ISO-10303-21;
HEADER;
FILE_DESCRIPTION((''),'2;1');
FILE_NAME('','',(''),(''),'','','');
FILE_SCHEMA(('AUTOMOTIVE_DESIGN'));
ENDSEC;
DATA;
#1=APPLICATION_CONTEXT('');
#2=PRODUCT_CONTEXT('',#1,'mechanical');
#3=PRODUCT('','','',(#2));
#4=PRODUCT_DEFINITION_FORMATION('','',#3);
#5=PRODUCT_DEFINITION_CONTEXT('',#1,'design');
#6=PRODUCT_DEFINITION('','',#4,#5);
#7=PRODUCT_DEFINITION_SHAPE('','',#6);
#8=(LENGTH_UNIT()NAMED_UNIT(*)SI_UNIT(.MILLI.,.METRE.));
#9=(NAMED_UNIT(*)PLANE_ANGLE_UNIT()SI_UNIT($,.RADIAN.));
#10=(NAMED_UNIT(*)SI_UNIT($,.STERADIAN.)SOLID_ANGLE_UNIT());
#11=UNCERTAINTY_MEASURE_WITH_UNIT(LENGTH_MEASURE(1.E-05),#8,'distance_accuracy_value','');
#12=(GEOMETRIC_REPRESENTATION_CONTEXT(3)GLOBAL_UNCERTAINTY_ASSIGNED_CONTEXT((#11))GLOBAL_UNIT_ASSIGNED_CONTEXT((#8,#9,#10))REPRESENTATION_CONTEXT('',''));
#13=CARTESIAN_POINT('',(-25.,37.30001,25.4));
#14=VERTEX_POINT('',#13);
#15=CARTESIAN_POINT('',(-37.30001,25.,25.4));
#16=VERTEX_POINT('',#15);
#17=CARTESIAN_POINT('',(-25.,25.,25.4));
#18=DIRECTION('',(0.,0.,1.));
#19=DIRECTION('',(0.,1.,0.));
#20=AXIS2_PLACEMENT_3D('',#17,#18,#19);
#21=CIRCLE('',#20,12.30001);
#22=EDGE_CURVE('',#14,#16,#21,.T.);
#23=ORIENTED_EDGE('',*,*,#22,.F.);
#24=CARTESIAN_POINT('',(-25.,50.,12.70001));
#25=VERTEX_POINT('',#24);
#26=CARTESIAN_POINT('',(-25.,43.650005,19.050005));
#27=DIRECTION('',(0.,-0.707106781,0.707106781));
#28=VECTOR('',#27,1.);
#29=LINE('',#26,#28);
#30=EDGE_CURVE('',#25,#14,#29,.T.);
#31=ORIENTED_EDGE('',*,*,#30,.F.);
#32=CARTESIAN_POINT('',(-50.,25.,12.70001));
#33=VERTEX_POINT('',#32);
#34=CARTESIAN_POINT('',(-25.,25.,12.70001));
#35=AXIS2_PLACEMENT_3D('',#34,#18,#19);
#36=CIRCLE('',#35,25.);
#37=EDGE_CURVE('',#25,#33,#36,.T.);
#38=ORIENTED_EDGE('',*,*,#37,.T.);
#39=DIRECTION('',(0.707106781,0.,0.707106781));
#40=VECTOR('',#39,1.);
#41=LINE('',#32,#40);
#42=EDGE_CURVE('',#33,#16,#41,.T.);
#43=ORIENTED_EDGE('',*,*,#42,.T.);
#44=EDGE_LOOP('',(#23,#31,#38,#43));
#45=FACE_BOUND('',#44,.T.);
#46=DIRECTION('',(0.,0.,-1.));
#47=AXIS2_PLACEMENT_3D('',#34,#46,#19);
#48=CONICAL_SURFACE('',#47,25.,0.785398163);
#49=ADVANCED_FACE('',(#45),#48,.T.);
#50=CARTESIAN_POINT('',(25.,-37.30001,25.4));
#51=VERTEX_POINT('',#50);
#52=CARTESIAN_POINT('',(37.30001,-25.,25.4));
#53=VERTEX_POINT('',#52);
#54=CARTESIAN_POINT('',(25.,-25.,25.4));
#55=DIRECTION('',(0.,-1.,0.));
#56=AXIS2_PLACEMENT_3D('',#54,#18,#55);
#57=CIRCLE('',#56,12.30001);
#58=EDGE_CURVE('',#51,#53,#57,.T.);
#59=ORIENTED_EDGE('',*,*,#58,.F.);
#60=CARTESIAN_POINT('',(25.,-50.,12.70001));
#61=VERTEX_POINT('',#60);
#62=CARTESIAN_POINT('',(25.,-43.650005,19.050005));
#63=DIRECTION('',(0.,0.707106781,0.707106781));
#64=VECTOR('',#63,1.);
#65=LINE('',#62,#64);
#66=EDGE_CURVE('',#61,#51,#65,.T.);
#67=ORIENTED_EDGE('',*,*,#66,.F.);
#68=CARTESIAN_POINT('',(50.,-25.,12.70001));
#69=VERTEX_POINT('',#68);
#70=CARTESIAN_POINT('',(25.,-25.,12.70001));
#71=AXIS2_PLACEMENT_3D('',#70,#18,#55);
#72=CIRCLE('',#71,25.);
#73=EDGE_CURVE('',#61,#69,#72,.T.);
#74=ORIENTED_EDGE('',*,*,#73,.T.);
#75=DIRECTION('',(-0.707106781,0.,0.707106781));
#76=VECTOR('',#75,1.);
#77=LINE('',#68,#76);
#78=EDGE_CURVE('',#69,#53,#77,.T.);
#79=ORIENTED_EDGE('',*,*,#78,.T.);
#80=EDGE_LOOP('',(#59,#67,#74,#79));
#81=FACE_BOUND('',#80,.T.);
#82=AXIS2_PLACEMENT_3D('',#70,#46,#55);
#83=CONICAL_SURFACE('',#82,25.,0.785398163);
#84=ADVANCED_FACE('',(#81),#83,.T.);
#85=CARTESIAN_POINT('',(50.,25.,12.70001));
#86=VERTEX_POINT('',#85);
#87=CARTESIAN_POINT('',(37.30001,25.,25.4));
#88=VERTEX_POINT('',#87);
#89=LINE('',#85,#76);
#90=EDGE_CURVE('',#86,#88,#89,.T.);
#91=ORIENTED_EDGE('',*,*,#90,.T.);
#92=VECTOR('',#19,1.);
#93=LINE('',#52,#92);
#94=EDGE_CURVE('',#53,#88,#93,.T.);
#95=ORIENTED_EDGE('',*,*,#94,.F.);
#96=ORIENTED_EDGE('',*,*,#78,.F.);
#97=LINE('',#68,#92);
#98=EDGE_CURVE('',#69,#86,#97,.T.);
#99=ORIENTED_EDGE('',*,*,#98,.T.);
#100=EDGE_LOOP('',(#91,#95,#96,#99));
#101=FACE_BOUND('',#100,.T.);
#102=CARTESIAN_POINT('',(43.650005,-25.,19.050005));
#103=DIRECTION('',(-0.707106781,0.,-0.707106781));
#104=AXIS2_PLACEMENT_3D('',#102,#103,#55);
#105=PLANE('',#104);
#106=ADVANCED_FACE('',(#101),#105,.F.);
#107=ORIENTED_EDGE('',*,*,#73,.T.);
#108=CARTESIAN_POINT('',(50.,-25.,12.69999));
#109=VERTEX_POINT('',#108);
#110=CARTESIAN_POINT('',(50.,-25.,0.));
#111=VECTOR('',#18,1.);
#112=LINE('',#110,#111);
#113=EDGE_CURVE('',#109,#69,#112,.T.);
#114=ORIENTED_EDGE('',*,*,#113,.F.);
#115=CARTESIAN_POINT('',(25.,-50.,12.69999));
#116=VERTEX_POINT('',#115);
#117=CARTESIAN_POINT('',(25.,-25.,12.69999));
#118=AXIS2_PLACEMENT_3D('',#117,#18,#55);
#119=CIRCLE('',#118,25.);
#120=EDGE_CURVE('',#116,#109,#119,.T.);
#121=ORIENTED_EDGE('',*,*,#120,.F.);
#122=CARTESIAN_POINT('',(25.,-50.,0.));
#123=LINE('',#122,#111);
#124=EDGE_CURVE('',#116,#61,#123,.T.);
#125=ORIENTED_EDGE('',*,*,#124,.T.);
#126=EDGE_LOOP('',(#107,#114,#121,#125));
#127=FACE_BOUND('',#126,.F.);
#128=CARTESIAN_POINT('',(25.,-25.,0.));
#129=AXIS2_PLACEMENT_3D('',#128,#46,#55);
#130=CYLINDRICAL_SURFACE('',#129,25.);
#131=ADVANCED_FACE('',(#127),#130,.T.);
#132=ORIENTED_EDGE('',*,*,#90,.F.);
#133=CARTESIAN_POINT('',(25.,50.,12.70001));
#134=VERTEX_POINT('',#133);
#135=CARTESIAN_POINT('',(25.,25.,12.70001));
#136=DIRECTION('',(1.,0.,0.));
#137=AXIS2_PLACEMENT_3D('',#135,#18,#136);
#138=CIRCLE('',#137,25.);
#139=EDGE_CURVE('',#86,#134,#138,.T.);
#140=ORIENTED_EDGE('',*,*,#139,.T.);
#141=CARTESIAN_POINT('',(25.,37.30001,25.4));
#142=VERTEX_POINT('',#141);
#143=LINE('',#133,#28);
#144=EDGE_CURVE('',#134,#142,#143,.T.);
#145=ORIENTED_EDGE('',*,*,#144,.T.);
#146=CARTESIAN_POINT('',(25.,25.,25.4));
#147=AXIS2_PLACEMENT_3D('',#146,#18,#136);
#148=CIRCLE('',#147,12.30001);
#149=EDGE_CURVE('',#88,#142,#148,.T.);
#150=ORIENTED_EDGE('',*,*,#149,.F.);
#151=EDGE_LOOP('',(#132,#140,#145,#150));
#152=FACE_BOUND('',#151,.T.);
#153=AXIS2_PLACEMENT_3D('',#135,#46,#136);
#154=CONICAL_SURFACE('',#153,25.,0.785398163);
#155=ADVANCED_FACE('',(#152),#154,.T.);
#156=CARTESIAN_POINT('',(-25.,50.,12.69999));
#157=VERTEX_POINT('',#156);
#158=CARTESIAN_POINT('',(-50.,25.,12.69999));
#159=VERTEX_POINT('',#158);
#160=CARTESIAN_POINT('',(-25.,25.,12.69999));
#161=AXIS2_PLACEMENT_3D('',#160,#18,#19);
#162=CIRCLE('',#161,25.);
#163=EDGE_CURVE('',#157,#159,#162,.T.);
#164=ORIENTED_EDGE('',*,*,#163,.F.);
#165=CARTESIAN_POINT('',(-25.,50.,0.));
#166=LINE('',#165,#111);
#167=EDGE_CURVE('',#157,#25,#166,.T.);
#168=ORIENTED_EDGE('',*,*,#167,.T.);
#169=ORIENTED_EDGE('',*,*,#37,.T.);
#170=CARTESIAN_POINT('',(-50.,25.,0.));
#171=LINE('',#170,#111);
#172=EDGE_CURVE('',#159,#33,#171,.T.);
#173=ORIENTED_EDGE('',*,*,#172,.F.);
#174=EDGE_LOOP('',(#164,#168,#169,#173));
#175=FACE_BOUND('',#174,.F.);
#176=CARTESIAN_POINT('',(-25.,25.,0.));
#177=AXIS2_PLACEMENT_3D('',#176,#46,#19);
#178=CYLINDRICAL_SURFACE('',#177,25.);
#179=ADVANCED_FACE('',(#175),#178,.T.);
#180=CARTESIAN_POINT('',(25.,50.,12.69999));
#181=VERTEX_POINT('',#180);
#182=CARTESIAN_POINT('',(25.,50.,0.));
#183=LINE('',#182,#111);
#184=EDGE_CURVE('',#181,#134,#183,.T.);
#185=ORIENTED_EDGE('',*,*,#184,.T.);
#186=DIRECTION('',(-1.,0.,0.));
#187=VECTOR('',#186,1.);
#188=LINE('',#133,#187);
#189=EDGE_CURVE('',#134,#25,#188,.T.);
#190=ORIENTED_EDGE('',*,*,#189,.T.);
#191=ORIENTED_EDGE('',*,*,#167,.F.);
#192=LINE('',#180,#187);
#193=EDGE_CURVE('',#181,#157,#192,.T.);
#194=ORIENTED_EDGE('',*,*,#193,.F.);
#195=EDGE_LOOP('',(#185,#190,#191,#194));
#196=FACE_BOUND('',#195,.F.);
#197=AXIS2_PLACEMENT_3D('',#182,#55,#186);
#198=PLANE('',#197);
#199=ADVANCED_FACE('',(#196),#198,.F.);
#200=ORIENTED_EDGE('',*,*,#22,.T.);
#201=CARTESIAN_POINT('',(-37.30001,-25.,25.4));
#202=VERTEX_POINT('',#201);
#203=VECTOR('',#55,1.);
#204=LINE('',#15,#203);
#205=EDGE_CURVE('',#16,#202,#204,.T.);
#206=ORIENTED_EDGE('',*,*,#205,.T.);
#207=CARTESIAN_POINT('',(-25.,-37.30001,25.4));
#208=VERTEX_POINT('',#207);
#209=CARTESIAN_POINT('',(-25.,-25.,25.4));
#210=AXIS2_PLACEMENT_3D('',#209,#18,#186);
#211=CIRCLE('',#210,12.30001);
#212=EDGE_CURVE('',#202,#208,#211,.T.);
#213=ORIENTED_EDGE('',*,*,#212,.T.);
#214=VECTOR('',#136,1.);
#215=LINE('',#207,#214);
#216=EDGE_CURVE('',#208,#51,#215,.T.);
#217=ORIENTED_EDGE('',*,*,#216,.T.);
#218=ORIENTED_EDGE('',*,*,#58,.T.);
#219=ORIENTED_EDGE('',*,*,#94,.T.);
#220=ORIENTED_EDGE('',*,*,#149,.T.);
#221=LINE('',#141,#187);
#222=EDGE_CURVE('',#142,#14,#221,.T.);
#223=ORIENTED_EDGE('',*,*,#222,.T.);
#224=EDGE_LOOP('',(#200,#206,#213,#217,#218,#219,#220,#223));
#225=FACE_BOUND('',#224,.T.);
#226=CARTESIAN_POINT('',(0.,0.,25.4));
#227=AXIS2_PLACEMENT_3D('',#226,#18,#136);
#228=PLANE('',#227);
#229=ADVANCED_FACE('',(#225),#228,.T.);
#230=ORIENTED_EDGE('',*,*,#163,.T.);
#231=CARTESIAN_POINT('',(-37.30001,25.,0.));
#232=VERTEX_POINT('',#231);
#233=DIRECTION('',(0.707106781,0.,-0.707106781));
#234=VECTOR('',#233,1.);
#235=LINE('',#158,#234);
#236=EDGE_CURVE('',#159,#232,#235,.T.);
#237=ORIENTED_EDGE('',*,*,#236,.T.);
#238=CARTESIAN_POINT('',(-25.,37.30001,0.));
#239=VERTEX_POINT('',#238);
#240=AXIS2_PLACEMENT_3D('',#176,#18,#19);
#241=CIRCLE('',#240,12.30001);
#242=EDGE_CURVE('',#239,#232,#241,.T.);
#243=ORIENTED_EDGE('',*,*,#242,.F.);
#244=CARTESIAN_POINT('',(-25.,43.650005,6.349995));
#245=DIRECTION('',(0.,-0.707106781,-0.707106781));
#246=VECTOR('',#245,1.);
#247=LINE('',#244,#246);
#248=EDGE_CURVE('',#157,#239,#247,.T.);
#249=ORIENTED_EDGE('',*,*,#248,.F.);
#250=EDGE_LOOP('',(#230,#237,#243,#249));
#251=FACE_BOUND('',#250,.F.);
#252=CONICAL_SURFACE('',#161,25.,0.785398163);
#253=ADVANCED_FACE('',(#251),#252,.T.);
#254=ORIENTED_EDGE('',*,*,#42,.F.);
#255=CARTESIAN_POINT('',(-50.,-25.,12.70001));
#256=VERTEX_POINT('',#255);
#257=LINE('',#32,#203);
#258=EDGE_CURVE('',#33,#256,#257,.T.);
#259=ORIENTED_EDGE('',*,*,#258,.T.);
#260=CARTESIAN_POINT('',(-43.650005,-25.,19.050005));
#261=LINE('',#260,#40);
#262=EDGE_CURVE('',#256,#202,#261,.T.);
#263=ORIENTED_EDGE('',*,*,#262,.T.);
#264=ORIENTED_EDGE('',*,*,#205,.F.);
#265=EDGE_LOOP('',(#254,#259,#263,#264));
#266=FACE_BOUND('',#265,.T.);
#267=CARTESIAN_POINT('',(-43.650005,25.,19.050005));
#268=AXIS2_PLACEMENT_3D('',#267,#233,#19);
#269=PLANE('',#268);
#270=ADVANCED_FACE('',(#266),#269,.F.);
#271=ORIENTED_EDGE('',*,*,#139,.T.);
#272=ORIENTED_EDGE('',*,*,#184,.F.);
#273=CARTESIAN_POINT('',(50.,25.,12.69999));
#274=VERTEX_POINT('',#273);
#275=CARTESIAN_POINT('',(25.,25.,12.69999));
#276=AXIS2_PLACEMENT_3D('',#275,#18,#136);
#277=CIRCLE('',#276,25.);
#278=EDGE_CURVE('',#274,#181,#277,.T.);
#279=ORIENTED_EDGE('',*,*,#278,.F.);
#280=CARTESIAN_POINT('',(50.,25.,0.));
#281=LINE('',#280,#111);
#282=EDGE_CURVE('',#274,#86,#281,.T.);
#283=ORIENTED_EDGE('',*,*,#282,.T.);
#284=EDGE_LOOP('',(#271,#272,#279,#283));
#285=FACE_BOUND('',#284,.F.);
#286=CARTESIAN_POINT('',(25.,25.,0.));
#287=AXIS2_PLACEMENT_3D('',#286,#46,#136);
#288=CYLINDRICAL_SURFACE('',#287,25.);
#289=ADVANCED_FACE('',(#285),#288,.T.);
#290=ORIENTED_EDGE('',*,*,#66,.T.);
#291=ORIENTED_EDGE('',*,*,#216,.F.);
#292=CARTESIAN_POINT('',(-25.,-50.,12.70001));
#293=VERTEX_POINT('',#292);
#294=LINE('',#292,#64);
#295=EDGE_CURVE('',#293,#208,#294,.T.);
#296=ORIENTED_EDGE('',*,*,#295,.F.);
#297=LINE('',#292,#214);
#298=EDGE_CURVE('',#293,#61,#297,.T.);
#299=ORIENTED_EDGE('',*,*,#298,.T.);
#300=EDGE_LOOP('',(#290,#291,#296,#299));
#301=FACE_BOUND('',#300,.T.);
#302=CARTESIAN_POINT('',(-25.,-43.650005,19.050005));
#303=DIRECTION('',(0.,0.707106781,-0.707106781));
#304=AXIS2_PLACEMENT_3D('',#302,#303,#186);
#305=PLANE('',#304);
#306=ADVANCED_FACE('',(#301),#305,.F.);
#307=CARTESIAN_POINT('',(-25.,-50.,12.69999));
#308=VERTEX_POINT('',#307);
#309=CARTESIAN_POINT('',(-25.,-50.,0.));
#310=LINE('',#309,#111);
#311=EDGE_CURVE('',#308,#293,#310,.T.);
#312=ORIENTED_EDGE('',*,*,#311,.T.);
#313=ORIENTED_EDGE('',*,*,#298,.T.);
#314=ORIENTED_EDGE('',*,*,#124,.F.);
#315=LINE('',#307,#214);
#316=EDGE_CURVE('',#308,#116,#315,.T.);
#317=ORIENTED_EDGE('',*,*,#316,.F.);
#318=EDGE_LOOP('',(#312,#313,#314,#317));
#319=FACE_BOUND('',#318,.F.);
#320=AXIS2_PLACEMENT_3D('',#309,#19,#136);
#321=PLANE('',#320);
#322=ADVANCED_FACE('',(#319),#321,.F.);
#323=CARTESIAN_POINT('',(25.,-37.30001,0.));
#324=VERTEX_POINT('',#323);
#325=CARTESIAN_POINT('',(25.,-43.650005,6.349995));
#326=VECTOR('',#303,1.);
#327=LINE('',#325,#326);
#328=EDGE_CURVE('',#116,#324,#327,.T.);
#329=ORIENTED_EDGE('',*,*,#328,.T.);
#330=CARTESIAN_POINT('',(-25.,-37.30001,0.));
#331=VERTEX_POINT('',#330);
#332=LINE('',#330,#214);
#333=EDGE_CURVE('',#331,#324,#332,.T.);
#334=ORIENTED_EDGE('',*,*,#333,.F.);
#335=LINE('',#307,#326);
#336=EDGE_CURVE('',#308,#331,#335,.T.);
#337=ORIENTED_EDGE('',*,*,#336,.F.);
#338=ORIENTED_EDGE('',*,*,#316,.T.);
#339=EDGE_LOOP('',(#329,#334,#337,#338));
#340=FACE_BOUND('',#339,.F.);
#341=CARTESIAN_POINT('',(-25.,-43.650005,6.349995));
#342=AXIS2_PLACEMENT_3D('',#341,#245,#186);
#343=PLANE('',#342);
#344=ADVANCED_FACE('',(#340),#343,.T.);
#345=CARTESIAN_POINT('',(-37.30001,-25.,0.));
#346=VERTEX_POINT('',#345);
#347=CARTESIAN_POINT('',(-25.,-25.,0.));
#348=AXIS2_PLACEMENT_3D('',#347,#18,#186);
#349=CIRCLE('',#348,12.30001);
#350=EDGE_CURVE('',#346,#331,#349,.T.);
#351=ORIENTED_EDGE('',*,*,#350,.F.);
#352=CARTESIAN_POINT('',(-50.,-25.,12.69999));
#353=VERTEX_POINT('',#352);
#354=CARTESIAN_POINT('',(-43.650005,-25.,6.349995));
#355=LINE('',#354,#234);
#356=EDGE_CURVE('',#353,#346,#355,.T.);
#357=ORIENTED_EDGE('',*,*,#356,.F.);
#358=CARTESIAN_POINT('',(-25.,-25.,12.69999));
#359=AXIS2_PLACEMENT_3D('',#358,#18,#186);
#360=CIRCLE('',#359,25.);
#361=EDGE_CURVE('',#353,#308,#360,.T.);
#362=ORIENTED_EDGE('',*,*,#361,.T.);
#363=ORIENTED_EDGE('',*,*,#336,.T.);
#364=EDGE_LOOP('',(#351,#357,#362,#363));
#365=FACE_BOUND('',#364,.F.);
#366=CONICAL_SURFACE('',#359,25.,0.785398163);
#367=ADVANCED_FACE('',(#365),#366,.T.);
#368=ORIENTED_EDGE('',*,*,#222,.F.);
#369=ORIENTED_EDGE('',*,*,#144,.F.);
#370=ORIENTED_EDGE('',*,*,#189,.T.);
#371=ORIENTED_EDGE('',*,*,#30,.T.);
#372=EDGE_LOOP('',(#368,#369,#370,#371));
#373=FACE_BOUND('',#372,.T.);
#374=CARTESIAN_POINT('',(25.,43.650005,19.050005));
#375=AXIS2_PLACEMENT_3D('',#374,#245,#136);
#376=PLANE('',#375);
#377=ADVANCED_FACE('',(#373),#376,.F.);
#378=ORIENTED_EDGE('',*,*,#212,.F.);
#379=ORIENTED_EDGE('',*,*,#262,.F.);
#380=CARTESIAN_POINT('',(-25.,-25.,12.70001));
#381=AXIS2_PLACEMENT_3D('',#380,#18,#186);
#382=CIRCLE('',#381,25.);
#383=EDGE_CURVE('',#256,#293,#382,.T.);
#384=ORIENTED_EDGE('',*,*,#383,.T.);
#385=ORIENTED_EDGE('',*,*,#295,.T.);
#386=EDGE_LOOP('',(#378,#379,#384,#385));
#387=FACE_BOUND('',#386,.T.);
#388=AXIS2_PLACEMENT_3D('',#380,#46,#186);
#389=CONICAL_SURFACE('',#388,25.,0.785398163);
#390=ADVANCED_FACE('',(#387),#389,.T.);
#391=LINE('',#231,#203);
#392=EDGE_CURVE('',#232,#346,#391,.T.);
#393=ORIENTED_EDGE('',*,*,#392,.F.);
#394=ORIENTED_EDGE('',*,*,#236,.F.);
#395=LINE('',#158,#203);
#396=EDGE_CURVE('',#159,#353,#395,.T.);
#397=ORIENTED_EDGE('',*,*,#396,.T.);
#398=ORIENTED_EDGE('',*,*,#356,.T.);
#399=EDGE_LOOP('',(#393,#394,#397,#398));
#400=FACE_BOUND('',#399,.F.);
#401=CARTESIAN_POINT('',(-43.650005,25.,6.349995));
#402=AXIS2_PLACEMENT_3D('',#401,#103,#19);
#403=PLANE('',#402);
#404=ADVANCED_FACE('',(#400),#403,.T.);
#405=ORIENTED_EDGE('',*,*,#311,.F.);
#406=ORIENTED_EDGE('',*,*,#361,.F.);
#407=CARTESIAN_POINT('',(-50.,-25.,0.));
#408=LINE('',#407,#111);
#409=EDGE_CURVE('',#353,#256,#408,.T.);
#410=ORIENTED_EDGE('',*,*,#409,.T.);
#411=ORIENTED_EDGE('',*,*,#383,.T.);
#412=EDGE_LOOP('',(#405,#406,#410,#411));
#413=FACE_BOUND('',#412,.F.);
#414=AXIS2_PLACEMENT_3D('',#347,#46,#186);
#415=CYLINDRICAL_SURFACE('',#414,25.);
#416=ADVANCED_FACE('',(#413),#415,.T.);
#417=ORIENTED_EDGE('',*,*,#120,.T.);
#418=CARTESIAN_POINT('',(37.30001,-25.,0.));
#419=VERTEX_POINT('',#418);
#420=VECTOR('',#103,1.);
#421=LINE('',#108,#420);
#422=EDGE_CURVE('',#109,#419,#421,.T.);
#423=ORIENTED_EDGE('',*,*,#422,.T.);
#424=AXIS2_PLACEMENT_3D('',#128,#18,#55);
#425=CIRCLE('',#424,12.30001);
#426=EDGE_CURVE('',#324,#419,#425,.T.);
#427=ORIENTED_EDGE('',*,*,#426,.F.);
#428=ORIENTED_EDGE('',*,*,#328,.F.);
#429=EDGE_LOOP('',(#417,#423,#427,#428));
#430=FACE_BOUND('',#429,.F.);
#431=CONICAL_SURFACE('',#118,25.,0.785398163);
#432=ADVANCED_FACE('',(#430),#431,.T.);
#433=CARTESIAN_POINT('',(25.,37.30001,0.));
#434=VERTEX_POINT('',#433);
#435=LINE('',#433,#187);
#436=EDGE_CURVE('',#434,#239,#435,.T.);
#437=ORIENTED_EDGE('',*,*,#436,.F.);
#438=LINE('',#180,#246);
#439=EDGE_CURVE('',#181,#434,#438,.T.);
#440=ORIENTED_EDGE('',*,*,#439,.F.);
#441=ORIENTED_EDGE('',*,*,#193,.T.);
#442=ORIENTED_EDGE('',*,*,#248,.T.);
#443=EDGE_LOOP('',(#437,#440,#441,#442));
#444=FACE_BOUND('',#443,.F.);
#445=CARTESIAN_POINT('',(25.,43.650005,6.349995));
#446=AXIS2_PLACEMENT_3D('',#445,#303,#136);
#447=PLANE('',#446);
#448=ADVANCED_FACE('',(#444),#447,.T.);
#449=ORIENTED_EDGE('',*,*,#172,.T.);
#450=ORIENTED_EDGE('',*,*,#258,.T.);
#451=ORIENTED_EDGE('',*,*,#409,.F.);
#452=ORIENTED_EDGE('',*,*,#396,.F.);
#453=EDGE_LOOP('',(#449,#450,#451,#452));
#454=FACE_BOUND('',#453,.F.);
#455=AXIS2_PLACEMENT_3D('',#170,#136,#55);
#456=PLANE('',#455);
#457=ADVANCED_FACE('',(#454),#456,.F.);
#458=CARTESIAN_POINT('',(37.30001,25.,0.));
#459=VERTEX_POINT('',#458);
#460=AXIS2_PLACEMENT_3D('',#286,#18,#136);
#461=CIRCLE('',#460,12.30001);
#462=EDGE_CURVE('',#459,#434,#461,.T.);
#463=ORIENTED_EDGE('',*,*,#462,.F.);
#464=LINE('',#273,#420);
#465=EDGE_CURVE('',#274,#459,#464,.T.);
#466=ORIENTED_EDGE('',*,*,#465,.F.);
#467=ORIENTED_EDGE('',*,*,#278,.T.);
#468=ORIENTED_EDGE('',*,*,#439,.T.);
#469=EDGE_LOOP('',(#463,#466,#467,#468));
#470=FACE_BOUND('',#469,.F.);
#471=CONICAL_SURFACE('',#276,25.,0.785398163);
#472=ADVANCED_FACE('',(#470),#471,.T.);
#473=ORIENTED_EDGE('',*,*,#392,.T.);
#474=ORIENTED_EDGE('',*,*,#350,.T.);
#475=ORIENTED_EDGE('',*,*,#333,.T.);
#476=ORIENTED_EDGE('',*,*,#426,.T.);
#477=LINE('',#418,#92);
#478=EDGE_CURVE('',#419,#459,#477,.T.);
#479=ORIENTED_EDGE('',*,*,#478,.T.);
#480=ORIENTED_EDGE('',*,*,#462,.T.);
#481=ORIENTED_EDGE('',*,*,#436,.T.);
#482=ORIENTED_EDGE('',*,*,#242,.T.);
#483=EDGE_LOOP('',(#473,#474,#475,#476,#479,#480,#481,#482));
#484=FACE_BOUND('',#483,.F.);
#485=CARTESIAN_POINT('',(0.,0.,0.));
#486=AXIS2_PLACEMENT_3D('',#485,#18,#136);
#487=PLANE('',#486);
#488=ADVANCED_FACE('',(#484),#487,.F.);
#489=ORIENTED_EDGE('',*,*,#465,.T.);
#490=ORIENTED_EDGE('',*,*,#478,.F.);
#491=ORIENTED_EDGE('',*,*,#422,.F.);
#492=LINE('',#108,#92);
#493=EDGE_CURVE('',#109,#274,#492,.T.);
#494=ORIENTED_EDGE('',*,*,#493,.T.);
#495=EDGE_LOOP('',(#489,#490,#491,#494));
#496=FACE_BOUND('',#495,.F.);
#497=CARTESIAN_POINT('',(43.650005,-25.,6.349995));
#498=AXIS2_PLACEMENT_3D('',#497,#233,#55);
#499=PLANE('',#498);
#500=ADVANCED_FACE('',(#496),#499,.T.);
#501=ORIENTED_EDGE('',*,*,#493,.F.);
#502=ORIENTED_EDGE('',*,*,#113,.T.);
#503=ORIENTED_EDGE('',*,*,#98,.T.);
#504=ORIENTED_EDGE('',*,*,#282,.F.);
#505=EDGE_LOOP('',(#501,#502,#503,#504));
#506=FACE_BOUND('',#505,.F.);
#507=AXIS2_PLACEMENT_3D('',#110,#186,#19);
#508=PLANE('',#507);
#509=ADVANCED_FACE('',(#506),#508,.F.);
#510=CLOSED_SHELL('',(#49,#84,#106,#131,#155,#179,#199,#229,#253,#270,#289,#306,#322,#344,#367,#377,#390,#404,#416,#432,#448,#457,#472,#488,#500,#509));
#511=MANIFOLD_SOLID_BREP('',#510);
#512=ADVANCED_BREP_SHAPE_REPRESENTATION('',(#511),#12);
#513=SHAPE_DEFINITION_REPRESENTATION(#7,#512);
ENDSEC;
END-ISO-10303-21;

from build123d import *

# Parameters (mm, degrees)
F1_DEPTH = 25.4
F2_SIZE  = 12.69999


# Not quite as in the source:
# - a fillet or chamfer is up to 0.001 mm smaller than in the source, because OpenCascade refuses the exact size


with BuildPart() as f1:
    # F0 (on Top) → F1 (new body)
    with BuildSketch(Plane.XY):
        with BuildLine():
            ThreePointArc((50, 25), (42.6776695297, 42.6776695297), (25, 50))
            Line((25, 50), (-25, 50))
            ThreePointArc((-25, 50), (-42.6776695297, 42.6776695297), (-50, 25))
            Line((-50, 25), (-50, -25))
            ThreePointArc((-50, -25), (-42.6776695297, -42.6776695297), (-25, -50))
            Line((-25, -50), (25, -50))
            ThreePointArc((25, -50), (42.6776695297, -42.6776695297), (50, -25))
            Line((50, -25), (50, 25))
        make_face()
    extrude(amount=F1_DEPTH)

    # F2 (size 12.7 in the source; OpenCascade refuses exactly that, so slightly less here)
    f2_edges = [f1.edges().sort_by_distance(p)[0] for p in [
        (42.67767, 42.67767, 25.4),
        (0, 50, 25.4),
        (-42.67767, 42.67767, 25.4),
        (-50, 0, 25.4),
        (-42.67767, -42.67767, 25.4),
        (0, -50, 25.4),
        (42.67767, -42.67767, 25.4),
        (50, 0, 25.4),
        (42.67767, 42.67767, 0),
        (0, 50, 0),
        (-42.67767, 42.67767, 0),
        (-50, 0, 0),
        (-42.67767, -42.67767, 0),
        (0, -50, 0),
        (42.67767, -42.67767, 0),
        (50, 0, 0),
    ]]
    chamfer(f2_edges, length=F2_SIZE)


solid = f1.part
